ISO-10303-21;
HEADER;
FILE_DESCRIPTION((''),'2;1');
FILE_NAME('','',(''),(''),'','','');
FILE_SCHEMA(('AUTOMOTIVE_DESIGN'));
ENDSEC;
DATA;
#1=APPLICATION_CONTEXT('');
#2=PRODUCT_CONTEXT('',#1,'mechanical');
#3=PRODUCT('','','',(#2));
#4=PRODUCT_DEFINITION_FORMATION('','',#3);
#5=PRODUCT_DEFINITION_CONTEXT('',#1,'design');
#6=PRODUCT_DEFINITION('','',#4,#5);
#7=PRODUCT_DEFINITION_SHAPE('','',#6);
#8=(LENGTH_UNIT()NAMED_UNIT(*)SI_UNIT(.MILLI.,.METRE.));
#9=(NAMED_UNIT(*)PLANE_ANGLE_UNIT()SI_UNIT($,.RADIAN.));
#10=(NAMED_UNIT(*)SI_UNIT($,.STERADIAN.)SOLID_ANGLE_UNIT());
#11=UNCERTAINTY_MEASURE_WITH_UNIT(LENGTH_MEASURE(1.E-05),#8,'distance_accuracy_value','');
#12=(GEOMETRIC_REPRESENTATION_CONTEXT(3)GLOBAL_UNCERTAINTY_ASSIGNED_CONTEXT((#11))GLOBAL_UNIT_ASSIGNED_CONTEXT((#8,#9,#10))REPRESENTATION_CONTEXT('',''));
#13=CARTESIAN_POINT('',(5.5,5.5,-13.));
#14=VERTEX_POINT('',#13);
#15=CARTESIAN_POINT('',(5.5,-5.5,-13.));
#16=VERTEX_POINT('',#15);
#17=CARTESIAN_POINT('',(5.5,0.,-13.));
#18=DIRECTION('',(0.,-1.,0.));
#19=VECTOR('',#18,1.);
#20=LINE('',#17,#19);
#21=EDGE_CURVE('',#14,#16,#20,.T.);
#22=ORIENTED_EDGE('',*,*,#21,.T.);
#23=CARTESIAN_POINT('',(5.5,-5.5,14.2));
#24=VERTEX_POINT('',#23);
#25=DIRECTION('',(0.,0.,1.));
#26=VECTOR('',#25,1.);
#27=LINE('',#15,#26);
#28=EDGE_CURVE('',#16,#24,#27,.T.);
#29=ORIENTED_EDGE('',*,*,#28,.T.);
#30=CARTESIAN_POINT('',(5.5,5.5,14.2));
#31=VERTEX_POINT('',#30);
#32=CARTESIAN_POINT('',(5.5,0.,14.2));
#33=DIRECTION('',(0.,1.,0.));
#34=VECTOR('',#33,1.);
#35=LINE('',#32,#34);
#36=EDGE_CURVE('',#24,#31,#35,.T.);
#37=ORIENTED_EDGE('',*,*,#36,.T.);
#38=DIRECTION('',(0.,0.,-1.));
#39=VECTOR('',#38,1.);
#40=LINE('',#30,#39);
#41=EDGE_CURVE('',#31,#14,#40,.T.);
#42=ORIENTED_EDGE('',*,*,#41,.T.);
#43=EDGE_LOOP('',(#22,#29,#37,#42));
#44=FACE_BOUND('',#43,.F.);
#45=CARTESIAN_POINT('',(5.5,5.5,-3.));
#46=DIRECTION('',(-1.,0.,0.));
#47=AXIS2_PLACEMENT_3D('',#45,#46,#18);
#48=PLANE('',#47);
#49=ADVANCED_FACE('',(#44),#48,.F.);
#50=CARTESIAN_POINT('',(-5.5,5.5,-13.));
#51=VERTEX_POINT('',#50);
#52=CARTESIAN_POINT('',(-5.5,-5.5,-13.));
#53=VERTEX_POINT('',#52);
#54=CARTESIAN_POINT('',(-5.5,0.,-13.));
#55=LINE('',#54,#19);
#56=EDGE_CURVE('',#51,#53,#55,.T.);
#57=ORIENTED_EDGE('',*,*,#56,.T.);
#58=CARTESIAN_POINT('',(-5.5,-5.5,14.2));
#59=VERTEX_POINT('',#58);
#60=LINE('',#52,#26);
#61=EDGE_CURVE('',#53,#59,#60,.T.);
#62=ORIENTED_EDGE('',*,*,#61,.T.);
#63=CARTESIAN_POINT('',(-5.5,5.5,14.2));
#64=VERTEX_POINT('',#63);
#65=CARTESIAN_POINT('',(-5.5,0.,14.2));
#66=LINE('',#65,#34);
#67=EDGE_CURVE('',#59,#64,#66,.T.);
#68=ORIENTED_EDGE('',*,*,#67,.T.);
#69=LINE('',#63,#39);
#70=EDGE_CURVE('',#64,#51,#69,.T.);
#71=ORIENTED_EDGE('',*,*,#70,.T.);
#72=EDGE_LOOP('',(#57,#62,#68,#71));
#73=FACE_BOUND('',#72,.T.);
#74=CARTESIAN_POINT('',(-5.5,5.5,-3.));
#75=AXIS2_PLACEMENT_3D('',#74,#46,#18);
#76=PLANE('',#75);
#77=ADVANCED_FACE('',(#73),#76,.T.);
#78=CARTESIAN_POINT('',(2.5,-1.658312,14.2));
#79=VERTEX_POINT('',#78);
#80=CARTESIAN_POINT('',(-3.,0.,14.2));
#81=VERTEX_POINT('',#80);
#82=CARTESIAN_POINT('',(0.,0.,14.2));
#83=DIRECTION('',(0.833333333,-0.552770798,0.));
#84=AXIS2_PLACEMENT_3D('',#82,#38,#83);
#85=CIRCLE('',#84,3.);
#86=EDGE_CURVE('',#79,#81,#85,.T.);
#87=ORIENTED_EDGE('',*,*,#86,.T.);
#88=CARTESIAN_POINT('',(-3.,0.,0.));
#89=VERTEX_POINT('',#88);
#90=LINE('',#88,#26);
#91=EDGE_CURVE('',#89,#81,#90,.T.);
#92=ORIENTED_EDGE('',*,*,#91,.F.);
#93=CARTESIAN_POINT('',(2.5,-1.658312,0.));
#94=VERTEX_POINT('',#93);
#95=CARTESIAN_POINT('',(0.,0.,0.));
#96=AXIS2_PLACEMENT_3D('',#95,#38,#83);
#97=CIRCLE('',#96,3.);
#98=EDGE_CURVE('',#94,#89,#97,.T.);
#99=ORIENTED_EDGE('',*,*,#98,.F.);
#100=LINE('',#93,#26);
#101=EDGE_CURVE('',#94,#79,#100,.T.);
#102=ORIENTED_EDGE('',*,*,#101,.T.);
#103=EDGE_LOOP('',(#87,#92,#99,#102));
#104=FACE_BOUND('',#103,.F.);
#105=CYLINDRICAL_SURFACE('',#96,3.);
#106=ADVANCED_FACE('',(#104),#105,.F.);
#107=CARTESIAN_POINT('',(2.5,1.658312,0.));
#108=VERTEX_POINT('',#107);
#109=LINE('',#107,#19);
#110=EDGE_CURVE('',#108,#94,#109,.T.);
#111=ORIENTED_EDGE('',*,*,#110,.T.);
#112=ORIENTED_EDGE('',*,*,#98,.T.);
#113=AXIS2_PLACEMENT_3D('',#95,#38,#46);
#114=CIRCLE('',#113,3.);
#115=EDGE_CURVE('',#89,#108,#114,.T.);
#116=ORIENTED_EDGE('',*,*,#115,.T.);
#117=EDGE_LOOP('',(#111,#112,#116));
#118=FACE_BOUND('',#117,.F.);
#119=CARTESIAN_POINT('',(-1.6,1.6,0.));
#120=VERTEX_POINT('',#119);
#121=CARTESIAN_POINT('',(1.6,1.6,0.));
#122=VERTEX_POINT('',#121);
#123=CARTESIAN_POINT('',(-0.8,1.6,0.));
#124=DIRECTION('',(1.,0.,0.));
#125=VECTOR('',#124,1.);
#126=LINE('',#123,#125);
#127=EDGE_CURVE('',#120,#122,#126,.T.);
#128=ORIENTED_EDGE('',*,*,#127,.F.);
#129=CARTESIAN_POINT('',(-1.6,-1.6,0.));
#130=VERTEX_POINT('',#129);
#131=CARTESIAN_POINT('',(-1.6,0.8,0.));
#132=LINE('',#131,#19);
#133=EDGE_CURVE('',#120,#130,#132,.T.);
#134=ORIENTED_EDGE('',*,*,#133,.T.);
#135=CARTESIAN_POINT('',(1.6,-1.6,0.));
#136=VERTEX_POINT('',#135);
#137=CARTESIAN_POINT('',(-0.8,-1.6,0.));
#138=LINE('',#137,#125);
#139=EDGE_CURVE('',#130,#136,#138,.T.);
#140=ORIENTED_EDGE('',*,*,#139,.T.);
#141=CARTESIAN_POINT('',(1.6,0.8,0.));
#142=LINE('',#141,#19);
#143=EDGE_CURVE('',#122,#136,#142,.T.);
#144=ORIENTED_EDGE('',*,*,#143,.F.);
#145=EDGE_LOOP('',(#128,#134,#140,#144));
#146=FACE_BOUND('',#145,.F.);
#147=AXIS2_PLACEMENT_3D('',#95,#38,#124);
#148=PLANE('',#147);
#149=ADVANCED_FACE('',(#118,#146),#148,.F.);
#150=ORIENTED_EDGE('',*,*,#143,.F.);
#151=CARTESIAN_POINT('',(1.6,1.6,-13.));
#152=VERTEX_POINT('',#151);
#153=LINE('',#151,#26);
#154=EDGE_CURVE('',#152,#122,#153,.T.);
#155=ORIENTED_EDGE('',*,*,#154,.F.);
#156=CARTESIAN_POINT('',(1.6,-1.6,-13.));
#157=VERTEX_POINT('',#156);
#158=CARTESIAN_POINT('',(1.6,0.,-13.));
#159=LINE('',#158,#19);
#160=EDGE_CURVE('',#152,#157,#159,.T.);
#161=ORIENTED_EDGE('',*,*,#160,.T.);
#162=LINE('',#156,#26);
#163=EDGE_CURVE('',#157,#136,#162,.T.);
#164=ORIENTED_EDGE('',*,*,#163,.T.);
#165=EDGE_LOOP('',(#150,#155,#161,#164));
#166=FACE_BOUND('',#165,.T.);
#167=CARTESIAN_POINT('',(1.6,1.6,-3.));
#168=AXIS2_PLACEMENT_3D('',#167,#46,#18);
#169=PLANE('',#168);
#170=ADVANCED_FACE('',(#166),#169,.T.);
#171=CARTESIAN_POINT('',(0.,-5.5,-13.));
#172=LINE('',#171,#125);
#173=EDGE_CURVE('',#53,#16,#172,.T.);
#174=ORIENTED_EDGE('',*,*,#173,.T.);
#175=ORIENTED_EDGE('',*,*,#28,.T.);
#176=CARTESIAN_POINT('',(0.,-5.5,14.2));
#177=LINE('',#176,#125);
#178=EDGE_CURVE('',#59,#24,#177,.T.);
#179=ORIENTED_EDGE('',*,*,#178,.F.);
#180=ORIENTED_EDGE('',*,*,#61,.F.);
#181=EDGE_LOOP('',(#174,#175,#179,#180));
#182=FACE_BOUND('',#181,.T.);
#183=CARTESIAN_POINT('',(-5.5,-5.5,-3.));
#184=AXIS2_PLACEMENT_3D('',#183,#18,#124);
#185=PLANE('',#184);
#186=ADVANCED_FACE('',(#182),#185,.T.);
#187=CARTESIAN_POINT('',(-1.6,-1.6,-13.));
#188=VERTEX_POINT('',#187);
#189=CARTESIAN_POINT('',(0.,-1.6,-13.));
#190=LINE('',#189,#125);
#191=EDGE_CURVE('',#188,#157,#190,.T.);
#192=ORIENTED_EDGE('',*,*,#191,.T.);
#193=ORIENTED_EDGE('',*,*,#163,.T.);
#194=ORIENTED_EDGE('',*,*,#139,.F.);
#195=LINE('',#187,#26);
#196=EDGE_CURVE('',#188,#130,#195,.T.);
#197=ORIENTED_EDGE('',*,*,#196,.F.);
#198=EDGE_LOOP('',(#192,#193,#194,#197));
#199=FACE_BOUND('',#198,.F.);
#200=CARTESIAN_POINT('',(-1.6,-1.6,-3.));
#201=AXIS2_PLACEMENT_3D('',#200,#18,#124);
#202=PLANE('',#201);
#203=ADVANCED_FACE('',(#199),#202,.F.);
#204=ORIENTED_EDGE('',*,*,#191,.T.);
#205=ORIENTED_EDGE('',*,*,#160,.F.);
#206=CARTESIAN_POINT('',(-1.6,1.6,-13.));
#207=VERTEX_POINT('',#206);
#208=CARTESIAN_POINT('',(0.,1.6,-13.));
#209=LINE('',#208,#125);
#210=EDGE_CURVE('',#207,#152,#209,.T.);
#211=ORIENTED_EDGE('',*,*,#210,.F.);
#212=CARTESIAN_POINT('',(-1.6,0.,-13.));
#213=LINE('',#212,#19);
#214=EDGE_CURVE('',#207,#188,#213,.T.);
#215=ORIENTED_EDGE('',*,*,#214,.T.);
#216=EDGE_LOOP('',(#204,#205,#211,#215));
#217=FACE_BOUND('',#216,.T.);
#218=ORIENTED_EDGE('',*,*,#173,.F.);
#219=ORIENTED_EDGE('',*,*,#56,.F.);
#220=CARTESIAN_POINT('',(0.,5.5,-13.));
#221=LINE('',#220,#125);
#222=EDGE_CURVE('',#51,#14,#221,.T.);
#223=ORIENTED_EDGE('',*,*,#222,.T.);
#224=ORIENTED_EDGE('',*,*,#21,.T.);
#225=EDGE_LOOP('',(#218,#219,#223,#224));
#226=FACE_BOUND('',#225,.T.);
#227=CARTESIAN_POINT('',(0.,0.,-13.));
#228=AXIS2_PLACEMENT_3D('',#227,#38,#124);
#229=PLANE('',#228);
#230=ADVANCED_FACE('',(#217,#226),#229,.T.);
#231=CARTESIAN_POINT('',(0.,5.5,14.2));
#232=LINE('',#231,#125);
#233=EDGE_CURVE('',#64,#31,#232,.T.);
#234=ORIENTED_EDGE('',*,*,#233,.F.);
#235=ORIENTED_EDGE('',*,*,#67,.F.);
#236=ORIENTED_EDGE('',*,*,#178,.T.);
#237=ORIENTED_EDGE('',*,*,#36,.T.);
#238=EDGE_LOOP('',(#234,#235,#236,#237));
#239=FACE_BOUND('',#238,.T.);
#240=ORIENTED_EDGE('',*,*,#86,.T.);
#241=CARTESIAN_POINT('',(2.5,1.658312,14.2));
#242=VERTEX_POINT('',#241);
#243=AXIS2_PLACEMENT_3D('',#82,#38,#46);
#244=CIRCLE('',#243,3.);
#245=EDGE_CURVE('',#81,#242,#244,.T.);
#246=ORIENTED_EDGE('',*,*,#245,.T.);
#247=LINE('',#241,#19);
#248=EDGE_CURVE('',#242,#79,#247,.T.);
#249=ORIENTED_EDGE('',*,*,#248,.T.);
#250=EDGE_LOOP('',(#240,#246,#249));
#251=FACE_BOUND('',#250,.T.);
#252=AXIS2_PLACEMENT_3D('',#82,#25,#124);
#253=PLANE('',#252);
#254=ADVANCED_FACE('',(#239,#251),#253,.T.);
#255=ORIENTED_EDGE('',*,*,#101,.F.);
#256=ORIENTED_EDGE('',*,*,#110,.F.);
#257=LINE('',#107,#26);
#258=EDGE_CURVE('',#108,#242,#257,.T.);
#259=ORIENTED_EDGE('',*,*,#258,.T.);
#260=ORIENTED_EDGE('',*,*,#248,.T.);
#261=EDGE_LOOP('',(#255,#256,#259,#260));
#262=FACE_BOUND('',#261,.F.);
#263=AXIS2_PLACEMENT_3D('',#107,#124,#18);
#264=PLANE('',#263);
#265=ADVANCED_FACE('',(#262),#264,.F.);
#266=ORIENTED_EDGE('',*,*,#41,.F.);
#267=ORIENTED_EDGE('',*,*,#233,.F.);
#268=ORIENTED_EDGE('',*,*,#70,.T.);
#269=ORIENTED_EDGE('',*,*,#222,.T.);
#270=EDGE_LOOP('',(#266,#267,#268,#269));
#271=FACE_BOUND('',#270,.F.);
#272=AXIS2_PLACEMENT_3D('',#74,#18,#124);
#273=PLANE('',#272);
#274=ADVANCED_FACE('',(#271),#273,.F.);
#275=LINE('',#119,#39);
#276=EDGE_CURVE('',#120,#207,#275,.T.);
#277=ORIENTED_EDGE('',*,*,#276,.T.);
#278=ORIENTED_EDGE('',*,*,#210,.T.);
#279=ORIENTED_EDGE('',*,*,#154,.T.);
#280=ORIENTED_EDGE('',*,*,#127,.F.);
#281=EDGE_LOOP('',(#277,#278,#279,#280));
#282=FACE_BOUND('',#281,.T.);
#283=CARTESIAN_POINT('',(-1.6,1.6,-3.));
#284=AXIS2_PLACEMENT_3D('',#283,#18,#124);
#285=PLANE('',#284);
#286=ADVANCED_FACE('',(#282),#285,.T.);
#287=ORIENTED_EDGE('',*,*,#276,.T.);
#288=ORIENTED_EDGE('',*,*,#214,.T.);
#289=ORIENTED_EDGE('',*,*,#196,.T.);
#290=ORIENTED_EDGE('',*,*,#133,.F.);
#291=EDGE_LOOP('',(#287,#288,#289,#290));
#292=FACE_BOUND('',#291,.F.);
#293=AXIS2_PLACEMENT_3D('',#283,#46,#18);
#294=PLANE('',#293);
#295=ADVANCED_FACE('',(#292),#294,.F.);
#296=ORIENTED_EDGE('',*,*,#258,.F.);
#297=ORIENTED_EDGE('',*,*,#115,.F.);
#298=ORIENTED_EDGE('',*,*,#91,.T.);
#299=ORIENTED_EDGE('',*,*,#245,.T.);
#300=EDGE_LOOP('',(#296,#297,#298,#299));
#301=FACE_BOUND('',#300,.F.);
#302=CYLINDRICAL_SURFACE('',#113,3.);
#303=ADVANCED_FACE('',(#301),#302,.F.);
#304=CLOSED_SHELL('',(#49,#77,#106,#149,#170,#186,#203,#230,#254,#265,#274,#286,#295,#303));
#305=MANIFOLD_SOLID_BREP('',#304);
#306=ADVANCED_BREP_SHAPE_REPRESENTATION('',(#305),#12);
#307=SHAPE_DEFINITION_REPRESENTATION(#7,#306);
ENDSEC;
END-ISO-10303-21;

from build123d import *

# Parameters (mm, degrees)
F0_W     = 11
F0_H     = 11
F1_DEPTH = 14.2
F2_W     = 11
F2_H     = 11
F3_DEPTH = 3
F4_W     = 11
F4_H     = 11
F4_W_2   = 3.2
F4_H_2   = 3.2
F5_DEPTH = 10
F6_DEPTH = 25


# Not quite as in the source:
# - a feature names something its author has since deleted; it is built from what else it names


with BuildPart() as f1:
    # F0 (on Top) → F1 (new body)
    with BuildSketch(Plane.XY):
        Rectangle(F0_W, F0_H)
        with BuildLine():
            ThreePointArc((2.5, 1.6583123952), (2.8722813233, 0.8660254038), (3, 0))
            ThreePointArc((3, 0), (2.8722813233, -0.8660254038), (2.5, -1.6583123952))
            ThreePointArc((2.5, -1.6583123952), (-0.8660254038, -2.8722813233), (-3, 0))
            ThreePointArc((-3, 0), (-0.8660254038, 2.8722813233), (2.5, 1.6583123952))
        make_face(mode=Mode.SUBTRACT)
        with BuildLine():
            ThreePointArc((2.5, -1.6583123952), (2.8722813233, -0.8660254038), (3, 0))
            ThreePointArc((3, 0), (2.8722813233, 0.8660254038), (2.5, 1.6583123952))
            Line((2.5, 1.6583123952), (2.5, 0))
            Line((2.5, 0), (2.5, -1.6583123952))
        make_face()
    extrude(amount=F1_DEPTH)

    # F2 (on face) → F3 (join)
    with BuildSketch(Plane(origin=(0, 0, 0), x_dir=(1, 0, 0), z_dir=(0, 0, -1))):
        Rectangle(F2_W, F2_H)
        with BuildLine():
            ThreePointArc((2.5, -1.6583123952), (-3, 0), (2.5, 1.6583123952))
            Line((2.5, 1.6583123952), (2.5, -1.6583123952))
        make_face(mode=Mode.SUBTRACT)
        with BuildLine():
            Line((2.5, -1.6583123952), (2.5, 1.6583123952))
            ThreePointArc((2.5, 1.6583123952), (-3, 0), (2.5, -1.6583123952))
        make_face()
    extrude(amount=F3_DEPTH)

    # F4 (on face) → F5 (join)
    with BuildSketch(Plane(origin=(0, 0, -3), x_dir=(1, 0, 0), z_dir=(0, 0, -1))):
        Rectangle(F4_W, F4_H)
        Rectangle(F4_W_2, F4_H_2, mode=Mode.SUBTRACT)
    extrude(amount=F5_DEPTH)

    # F6 (cut): a face of the model
    f6_faces = [f1.faces().sort_by_distance(p)[0] for p in [
        (0, 0, -3),
    ]]
    extrude(f6_faces, amount=-F6_DEPTH, mode=Mode.SUBTRACT)


solid = f1.part
